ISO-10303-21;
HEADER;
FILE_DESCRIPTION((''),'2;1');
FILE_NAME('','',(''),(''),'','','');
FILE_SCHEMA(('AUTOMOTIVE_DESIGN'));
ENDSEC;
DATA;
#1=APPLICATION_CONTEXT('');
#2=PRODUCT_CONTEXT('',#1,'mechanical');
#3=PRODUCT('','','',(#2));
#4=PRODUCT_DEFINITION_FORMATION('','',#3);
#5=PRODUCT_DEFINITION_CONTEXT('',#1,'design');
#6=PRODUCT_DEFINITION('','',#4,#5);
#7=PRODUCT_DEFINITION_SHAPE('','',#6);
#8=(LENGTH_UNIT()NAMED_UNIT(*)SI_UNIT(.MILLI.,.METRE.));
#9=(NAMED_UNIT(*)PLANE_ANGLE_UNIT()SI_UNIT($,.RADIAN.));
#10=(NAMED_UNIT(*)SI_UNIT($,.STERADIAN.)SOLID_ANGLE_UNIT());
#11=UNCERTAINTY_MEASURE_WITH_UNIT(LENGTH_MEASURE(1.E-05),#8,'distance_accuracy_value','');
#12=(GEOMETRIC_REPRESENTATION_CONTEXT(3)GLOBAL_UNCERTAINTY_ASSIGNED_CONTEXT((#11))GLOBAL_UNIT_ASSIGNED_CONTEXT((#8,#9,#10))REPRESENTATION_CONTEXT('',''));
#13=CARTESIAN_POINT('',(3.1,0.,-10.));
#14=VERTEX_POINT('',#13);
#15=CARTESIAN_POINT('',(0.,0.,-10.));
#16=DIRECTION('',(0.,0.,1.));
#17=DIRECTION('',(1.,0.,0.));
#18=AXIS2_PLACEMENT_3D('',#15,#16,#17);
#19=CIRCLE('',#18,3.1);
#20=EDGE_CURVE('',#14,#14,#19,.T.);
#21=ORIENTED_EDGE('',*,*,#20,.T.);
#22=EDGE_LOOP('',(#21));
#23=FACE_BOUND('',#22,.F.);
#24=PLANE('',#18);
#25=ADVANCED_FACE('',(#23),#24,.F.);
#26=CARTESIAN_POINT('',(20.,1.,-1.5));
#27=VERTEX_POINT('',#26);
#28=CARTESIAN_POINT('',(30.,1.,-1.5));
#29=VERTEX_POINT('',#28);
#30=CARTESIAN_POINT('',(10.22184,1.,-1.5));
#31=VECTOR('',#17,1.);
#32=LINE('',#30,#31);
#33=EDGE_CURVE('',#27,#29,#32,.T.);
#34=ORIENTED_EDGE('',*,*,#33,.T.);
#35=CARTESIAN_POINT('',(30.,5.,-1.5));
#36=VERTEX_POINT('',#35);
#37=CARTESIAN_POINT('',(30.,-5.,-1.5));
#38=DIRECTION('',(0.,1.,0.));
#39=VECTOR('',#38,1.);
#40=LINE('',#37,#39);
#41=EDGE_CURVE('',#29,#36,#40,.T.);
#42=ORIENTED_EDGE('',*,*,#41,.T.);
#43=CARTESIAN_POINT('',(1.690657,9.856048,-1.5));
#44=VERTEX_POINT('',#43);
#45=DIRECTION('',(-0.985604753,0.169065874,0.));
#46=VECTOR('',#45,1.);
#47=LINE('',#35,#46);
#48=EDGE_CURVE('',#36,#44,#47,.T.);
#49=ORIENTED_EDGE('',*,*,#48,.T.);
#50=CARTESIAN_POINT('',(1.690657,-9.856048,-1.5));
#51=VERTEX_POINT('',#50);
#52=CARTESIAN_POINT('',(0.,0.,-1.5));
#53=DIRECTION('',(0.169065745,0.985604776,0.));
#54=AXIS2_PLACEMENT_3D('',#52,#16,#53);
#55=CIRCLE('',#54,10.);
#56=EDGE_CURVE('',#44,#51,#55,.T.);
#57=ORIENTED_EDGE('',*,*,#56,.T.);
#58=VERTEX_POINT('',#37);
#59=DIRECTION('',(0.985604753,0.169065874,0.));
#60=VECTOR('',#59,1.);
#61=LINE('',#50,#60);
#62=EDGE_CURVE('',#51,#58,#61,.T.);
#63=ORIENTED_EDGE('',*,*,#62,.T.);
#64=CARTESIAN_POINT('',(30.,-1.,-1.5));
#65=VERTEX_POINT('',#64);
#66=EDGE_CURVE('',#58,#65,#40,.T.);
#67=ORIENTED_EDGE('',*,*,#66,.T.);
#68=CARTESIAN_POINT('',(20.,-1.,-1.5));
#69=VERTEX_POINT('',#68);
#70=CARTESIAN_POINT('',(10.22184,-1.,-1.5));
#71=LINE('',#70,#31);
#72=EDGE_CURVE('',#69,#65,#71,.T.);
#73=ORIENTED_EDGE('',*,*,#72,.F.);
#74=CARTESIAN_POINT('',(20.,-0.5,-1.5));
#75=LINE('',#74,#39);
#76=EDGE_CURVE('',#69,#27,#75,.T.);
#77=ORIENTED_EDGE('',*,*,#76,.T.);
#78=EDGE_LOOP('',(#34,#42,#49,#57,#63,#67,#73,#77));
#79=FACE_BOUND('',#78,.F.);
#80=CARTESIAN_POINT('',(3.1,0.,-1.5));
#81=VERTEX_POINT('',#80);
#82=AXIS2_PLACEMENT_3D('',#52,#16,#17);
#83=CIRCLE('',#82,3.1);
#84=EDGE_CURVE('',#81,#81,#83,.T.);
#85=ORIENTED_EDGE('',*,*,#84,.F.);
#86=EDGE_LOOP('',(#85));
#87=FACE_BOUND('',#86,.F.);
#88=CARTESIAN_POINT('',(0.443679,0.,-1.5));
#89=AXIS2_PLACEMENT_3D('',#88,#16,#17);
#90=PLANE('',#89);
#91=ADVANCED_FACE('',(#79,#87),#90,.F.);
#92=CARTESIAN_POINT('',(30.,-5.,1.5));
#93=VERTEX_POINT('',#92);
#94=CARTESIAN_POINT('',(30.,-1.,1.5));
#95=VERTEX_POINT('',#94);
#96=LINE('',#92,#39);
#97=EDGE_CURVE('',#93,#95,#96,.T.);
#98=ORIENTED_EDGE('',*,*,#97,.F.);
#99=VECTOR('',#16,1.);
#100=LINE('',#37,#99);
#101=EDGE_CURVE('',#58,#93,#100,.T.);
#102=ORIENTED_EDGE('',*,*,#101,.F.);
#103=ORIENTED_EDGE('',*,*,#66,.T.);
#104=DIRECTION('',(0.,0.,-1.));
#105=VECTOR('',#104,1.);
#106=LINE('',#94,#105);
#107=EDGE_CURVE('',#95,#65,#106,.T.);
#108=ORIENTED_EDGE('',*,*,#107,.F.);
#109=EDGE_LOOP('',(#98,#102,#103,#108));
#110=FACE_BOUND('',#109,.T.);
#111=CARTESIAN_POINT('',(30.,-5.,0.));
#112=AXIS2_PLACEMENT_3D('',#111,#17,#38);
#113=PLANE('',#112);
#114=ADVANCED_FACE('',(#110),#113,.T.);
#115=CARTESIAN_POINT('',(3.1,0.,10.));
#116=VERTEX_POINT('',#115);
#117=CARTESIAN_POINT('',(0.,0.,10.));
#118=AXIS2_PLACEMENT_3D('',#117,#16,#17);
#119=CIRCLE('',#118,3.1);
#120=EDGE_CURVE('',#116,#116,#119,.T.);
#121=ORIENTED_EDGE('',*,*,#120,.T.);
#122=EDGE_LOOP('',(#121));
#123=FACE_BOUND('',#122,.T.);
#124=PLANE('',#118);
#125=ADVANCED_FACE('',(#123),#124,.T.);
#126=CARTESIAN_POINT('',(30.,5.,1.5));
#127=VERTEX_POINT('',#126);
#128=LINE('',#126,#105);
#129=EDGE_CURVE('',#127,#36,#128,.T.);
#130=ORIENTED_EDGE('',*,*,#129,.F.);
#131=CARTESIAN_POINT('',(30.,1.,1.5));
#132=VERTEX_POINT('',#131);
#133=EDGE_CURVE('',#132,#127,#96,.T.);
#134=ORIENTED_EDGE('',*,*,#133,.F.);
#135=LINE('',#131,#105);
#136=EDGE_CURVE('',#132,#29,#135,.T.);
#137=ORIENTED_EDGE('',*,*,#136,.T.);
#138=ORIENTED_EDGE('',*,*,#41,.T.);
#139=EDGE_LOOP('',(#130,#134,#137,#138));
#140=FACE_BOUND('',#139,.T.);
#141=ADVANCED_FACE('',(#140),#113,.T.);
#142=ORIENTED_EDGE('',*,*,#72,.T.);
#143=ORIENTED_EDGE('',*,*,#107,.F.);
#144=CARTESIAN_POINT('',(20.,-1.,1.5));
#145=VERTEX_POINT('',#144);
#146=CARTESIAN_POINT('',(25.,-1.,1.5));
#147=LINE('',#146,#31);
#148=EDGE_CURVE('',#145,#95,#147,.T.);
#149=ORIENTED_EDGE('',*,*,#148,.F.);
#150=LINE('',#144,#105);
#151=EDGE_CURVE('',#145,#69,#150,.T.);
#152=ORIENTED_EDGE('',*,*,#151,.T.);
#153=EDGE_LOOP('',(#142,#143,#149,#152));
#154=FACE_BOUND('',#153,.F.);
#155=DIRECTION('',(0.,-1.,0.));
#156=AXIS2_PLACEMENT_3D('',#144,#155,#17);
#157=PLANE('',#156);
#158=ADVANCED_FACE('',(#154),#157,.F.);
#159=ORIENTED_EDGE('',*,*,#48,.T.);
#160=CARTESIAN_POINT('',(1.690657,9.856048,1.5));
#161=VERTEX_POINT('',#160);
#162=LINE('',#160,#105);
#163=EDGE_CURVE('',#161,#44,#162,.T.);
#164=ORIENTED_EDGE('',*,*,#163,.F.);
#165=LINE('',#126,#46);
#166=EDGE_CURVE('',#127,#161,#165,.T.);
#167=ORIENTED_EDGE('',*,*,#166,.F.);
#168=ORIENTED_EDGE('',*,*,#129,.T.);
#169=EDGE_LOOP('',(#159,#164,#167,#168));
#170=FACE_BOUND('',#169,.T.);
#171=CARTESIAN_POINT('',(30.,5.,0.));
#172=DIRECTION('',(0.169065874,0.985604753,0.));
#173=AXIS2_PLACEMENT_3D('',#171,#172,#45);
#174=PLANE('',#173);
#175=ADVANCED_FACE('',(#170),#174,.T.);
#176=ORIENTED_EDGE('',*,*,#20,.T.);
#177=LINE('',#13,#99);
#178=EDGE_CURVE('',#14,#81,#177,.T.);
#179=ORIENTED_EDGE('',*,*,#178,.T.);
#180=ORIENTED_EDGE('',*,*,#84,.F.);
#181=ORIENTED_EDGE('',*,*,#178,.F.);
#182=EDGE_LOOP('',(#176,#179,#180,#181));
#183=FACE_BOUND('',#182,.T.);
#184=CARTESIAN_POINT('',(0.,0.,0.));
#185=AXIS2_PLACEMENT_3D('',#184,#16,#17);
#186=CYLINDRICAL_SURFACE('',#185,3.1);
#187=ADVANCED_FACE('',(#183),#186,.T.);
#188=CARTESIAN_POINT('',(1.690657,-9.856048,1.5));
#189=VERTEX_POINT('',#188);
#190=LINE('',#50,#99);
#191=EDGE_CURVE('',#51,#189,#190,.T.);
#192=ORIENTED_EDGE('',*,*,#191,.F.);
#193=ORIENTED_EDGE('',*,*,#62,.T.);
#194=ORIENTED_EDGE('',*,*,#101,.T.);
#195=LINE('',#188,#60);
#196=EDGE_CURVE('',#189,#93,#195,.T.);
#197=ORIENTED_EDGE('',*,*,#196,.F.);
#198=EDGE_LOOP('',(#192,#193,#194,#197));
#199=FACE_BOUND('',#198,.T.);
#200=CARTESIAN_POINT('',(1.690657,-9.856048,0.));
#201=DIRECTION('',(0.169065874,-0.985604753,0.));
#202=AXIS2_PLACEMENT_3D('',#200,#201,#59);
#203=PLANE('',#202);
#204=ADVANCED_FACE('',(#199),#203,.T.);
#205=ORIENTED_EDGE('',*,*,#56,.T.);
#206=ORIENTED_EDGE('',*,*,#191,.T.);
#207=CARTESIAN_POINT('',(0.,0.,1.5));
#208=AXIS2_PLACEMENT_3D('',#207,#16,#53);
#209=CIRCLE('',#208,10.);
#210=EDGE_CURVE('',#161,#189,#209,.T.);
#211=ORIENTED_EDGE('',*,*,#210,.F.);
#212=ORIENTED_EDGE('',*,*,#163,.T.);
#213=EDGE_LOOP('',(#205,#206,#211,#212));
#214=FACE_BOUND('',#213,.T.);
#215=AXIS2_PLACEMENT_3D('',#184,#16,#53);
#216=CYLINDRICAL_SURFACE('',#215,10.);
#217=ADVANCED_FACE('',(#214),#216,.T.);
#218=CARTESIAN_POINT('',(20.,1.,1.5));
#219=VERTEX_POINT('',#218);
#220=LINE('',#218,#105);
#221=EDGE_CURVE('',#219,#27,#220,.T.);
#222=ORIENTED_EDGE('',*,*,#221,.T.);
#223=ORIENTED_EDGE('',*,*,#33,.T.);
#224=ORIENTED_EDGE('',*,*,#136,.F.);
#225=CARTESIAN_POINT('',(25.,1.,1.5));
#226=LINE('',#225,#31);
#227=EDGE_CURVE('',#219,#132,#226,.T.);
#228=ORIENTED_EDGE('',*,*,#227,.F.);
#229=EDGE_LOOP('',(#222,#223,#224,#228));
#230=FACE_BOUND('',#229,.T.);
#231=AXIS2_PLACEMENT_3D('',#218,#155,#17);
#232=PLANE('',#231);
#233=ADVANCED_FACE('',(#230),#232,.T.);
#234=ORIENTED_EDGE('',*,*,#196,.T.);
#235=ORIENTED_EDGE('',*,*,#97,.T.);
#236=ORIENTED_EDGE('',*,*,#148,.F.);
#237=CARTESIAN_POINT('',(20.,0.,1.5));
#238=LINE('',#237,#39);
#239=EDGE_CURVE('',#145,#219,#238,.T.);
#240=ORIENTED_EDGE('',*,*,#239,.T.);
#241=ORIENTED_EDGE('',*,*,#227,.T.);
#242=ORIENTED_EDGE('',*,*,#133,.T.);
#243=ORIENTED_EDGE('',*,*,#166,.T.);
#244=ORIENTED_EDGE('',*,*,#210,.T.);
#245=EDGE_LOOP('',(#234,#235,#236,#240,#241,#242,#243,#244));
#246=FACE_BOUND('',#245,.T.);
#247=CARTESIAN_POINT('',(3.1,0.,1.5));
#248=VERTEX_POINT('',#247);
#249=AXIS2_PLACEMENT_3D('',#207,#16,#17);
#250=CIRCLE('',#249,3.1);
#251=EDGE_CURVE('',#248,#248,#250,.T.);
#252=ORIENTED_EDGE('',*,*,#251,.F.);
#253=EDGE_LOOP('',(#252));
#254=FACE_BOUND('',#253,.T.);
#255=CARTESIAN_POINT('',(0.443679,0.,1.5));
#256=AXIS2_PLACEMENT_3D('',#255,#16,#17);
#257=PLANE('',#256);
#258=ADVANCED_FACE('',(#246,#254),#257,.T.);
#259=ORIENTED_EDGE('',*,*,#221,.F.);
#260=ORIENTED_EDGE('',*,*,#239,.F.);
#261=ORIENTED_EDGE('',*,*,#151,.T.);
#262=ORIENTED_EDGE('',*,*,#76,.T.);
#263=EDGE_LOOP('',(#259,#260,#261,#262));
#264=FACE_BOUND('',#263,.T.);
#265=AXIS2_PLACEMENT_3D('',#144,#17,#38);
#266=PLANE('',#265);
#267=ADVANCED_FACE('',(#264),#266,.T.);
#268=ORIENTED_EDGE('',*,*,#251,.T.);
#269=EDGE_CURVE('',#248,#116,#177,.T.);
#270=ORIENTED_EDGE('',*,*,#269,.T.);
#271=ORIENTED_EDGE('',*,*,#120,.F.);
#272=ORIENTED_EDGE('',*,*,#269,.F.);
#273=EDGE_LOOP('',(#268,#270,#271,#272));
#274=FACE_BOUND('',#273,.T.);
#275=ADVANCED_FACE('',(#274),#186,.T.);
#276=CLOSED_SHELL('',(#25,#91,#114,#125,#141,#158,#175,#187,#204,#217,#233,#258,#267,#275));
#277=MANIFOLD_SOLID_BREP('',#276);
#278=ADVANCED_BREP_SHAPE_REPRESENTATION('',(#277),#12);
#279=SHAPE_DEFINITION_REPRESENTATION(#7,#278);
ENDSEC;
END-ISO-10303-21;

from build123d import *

# Parameters (mm, degrees)
F0_R     = 3.1
F1_DEPTH = 10
F2_DEPTH = 1.5
F3_W     = 10
F3_H     = 2
F4_DEPTH = 11.501


# Not quite as in the source:
# - a feature names something its author has since deleted; it is built from what else it names


with BuildPart() as f1:
    # F0 (on Top) → F1 (new body, symmetric)
    with BuildSketch(Plane.XY):
        Circle(F0_R)
    extrude(amount=F1_DEPTH, both=True)

    # F0 (on Top) → F2 (join, symmetric)
    with BuildSketch(Plane.XY):
        with BuildLine():
            ThreePointArc((1.6906574466, -9.8560477575), (7.6454749514, -6.4456739576), (10, 0))
            ThreePointArc((10, 0), (7.6454749525, 6.4456739563), (1.6906574499, 9.8560477569))
            ThreePointArc((1.6906574499, 9.8560477569), (-10, 1.7e-09), (1.6906574466, -9.8560477575))
        make_face()
        Circle(F0_R, mode=Mode.SUBTRACT)
        with BuildLine():
            ThreePointArc((1.6906574499, 9.8560477569), (7.6454749525, 6.4456739563), (10, 0))
            ThreePointArc((10, 0), (7.6454749514, -6.4456739576), (1.6906574466, -9.8560477575))
            Line((1.6906574466, -9.8560477575), (30, -5))
            Line((30, -5), (30, 5))
            Line((30, 5), (1.6906574499, 9.8560477569))
        make_face()
    extrude(amount=F2_DEPTH, both=True)

    # F3 (on face) → F4 (cut, through all)
    with BuildSketch(Plane.XY.offset(1.5)):
        with Locations((25, 0)):
            Rectangle(F3_W, F3_H)
    extrude(amount=-F4_DEPTH, mode=Mode.SUBTRACT)


solid = f1.part
